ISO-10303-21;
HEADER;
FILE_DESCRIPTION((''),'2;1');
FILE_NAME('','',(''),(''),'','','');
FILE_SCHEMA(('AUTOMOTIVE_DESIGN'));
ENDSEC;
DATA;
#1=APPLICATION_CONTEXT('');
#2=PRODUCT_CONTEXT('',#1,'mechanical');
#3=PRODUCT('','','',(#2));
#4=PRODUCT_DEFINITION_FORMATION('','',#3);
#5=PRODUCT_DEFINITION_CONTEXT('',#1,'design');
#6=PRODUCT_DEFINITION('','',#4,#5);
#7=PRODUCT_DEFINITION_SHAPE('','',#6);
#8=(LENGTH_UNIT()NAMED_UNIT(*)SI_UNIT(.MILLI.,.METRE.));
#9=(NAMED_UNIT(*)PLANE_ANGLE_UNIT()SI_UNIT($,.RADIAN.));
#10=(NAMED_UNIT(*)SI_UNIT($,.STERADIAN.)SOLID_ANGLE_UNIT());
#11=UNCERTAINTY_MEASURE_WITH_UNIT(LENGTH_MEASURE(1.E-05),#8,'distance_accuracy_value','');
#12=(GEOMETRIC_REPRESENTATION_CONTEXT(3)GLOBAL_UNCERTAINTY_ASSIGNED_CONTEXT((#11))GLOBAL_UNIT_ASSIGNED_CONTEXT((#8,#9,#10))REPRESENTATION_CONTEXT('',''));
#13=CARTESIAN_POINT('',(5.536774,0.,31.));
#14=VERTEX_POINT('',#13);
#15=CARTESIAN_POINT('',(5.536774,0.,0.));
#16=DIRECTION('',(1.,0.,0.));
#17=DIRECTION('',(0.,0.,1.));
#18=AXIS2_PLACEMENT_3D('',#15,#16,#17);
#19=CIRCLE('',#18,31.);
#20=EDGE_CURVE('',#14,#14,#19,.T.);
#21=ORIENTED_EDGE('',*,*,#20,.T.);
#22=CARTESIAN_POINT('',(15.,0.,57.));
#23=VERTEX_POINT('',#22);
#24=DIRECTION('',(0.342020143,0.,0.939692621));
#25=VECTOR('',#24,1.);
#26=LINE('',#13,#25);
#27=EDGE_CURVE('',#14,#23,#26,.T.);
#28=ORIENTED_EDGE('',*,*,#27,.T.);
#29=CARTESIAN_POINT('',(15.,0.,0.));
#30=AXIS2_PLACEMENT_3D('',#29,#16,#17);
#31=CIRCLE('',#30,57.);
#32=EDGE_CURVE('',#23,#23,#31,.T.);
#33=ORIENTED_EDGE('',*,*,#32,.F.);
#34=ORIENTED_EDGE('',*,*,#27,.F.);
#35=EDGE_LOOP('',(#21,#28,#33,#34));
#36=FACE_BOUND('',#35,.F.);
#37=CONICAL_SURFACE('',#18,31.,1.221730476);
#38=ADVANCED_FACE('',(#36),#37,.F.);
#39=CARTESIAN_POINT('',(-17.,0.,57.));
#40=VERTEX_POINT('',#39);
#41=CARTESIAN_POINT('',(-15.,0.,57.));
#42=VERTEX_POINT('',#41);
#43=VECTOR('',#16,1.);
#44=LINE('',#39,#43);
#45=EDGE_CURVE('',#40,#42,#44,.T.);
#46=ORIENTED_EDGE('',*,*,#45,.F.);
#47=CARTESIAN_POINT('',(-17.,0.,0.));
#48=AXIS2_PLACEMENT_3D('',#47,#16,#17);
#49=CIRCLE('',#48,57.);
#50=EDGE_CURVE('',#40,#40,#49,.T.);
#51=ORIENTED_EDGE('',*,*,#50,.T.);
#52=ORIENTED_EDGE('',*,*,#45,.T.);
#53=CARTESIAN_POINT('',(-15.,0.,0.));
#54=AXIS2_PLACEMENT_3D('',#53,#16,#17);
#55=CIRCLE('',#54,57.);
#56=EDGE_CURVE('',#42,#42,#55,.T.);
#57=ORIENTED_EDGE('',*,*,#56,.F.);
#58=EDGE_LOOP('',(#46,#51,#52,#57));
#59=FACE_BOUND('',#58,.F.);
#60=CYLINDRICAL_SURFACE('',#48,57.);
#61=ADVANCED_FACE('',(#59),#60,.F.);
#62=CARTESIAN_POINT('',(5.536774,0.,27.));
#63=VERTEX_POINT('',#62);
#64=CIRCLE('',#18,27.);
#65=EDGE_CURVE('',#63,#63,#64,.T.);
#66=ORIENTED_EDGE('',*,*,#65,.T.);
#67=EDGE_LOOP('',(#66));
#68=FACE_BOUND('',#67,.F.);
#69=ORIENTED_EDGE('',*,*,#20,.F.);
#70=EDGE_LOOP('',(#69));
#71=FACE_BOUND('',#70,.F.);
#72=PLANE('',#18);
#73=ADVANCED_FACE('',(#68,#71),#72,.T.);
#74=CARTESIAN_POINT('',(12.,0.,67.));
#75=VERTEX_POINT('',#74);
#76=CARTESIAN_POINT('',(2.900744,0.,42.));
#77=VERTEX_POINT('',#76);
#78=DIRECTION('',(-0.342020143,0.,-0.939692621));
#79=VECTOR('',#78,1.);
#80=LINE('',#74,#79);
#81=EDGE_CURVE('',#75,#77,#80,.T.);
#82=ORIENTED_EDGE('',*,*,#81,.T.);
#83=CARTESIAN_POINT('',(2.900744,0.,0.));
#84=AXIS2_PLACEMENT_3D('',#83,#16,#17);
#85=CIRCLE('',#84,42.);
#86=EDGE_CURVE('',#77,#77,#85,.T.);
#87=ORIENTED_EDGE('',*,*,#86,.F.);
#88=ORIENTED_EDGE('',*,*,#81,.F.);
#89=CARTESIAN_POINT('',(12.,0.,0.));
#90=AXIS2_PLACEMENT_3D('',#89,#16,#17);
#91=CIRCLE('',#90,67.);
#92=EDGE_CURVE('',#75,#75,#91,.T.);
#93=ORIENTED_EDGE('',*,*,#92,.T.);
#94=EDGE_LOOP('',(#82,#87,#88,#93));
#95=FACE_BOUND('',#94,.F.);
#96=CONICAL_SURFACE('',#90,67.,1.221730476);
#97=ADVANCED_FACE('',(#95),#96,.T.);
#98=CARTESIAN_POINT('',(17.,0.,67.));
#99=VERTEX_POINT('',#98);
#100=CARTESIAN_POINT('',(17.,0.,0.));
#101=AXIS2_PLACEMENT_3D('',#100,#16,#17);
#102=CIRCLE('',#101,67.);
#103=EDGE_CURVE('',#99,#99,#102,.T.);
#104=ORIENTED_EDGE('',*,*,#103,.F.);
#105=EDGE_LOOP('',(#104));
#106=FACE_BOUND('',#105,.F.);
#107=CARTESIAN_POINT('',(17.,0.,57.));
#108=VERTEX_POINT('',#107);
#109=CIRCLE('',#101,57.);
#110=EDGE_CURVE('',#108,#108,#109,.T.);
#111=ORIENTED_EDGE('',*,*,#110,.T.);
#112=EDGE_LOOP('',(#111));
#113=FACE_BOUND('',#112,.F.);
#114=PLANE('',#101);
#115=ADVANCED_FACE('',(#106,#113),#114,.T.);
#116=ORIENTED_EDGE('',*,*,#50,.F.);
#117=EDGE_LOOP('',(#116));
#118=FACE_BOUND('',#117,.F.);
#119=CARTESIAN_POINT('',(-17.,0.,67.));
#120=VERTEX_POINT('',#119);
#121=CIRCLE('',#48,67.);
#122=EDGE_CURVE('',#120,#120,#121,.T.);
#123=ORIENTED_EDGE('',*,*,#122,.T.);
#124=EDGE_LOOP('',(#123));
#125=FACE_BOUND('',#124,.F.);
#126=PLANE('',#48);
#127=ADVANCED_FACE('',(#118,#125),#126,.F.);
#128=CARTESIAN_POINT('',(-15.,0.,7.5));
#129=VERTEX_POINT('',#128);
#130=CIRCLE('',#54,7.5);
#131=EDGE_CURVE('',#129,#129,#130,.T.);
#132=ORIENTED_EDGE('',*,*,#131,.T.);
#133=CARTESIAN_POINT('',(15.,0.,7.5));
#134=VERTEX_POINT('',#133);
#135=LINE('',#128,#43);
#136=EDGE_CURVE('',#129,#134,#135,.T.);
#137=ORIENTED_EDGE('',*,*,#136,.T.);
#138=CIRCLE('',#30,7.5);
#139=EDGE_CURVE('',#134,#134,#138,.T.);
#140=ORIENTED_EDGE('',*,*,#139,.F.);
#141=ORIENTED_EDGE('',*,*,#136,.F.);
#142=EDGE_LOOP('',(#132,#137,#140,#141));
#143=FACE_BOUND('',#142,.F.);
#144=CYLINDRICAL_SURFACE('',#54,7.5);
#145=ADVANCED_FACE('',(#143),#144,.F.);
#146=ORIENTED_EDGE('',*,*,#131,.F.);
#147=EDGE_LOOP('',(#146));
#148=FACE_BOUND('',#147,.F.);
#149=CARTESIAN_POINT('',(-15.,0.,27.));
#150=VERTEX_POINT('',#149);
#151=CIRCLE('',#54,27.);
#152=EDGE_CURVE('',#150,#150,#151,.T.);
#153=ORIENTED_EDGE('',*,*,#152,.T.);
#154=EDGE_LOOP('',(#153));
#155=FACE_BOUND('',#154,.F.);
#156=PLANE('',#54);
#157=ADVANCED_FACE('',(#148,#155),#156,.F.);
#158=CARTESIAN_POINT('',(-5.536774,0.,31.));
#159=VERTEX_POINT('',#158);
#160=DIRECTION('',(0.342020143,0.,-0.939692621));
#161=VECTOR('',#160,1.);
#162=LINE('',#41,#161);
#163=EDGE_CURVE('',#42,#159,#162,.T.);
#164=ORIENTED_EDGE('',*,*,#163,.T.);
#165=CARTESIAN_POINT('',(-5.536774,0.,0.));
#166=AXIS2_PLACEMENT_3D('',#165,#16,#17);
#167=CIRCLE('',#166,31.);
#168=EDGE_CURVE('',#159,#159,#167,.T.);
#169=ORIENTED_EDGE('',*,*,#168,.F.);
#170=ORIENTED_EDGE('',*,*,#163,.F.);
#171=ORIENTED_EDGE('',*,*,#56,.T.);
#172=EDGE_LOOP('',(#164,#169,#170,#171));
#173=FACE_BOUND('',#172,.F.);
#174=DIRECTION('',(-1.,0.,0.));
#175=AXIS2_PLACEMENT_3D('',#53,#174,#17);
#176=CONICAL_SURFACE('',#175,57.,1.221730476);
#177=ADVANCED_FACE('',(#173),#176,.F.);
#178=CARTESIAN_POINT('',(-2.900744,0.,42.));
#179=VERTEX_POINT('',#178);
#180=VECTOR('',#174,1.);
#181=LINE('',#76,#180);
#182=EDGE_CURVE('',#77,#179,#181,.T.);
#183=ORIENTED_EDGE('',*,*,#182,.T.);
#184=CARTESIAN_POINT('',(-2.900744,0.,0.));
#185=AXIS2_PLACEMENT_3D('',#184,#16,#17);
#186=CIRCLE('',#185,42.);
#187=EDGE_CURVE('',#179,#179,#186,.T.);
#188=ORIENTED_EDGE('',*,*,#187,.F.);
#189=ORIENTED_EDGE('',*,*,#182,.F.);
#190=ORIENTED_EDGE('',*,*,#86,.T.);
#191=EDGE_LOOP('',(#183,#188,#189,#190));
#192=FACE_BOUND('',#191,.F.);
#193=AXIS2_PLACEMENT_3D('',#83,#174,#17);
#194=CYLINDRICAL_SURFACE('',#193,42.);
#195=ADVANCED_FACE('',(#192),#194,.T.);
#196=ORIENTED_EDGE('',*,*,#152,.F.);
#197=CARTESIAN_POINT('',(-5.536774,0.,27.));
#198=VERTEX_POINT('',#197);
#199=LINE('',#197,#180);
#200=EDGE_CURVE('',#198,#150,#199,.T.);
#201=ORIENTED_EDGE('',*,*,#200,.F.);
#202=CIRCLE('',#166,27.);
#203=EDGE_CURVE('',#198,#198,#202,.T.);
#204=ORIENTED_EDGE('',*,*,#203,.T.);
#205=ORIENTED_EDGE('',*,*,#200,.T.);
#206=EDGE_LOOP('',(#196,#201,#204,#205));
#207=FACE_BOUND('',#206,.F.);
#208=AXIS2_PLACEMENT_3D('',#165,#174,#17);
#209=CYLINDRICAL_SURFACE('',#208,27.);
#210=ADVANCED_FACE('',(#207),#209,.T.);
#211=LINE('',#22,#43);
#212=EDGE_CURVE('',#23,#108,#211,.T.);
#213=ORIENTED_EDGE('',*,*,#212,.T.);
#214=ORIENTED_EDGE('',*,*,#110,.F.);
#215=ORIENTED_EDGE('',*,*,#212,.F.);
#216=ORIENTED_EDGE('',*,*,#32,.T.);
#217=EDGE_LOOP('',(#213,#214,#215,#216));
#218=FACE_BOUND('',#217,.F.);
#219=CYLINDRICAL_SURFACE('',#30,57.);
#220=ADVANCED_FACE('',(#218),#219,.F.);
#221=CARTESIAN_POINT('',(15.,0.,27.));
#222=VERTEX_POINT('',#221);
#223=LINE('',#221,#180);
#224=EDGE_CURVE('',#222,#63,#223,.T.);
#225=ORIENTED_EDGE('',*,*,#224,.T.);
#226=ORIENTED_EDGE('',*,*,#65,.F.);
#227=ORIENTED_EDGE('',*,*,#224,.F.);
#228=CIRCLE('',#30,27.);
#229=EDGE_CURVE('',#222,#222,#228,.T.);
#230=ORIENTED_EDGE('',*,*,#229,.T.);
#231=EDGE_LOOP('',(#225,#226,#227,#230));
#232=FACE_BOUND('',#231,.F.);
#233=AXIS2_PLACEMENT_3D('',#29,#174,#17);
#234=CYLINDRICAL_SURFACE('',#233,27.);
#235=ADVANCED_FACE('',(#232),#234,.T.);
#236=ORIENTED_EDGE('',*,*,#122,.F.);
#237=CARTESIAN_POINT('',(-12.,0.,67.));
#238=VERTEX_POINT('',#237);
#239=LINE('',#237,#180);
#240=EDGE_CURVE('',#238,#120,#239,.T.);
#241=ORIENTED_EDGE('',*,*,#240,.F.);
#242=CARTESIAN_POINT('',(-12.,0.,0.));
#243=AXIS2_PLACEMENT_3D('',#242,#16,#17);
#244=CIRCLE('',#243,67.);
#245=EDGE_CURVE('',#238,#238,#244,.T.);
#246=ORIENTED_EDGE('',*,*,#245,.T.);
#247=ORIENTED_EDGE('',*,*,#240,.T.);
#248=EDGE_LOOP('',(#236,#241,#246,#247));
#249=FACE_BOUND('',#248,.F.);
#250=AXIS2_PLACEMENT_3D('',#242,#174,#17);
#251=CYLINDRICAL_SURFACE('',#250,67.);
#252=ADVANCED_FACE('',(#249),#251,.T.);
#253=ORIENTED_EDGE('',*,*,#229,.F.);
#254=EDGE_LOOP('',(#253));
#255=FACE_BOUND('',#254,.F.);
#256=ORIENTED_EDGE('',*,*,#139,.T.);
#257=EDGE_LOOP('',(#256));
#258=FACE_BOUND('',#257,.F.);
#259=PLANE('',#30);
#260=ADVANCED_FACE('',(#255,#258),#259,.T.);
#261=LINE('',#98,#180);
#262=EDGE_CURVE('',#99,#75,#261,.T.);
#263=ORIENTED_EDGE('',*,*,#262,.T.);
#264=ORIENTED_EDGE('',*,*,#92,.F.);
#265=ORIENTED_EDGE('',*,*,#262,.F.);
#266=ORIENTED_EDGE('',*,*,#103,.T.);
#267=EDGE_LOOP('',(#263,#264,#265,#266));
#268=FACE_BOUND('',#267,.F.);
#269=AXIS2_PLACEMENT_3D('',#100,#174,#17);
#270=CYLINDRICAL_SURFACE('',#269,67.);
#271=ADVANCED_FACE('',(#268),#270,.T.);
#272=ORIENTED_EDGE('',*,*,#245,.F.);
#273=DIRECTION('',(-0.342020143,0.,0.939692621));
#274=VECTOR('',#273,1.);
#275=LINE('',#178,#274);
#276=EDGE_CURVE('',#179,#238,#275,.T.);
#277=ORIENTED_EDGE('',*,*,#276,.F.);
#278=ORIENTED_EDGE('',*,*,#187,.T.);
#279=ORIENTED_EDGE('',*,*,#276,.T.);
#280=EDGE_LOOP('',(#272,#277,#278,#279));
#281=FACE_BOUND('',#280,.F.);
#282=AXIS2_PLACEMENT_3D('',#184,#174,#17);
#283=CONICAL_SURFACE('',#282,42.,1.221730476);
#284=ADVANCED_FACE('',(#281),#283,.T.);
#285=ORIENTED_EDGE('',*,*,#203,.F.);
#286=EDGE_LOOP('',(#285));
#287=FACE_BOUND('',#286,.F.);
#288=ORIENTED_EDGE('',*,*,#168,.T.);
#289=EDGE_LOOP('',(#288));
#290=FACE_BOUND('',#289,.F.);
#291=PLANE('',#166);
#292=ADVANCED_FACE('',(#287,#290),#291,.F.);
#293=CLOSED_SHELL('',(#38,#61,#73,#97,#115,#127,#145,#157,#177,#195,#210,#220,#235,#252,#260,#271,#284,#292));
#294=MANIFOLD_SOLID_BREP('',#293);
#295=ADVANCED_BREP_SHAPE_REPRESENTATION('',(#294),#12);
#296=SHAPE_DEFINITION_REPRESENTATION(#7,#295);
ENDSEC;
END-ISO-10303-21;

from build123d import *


# Not quite as in the source:
# - a feature names something its author has since deleted; it is built from what else it names


with BuildPart() as f1:
    # F0 (on Front) → F1 (revolve)
    with BuildSketch(Plane.XZ):
        Polygon((-15, 7.5), (0, 7.5), (15, 7.5), (15, 27), (5.5367739091, 27), (5.5367739091, 31), (15, 57), (17, 57), (17, 67), (12, 67), (2.9007441433, 42), (0, 42), (-2.9007441433, 42), (-12, 67), (-17, 67), (-17, 57), (-15, 57), (-5.5367739091, 31), (-5.5367739091, 27), (-15, 27), align=None)
    revolve(axis=Axis((1.6064876985, 0, 0), (1, 0, 0)))


solid = f1.part
